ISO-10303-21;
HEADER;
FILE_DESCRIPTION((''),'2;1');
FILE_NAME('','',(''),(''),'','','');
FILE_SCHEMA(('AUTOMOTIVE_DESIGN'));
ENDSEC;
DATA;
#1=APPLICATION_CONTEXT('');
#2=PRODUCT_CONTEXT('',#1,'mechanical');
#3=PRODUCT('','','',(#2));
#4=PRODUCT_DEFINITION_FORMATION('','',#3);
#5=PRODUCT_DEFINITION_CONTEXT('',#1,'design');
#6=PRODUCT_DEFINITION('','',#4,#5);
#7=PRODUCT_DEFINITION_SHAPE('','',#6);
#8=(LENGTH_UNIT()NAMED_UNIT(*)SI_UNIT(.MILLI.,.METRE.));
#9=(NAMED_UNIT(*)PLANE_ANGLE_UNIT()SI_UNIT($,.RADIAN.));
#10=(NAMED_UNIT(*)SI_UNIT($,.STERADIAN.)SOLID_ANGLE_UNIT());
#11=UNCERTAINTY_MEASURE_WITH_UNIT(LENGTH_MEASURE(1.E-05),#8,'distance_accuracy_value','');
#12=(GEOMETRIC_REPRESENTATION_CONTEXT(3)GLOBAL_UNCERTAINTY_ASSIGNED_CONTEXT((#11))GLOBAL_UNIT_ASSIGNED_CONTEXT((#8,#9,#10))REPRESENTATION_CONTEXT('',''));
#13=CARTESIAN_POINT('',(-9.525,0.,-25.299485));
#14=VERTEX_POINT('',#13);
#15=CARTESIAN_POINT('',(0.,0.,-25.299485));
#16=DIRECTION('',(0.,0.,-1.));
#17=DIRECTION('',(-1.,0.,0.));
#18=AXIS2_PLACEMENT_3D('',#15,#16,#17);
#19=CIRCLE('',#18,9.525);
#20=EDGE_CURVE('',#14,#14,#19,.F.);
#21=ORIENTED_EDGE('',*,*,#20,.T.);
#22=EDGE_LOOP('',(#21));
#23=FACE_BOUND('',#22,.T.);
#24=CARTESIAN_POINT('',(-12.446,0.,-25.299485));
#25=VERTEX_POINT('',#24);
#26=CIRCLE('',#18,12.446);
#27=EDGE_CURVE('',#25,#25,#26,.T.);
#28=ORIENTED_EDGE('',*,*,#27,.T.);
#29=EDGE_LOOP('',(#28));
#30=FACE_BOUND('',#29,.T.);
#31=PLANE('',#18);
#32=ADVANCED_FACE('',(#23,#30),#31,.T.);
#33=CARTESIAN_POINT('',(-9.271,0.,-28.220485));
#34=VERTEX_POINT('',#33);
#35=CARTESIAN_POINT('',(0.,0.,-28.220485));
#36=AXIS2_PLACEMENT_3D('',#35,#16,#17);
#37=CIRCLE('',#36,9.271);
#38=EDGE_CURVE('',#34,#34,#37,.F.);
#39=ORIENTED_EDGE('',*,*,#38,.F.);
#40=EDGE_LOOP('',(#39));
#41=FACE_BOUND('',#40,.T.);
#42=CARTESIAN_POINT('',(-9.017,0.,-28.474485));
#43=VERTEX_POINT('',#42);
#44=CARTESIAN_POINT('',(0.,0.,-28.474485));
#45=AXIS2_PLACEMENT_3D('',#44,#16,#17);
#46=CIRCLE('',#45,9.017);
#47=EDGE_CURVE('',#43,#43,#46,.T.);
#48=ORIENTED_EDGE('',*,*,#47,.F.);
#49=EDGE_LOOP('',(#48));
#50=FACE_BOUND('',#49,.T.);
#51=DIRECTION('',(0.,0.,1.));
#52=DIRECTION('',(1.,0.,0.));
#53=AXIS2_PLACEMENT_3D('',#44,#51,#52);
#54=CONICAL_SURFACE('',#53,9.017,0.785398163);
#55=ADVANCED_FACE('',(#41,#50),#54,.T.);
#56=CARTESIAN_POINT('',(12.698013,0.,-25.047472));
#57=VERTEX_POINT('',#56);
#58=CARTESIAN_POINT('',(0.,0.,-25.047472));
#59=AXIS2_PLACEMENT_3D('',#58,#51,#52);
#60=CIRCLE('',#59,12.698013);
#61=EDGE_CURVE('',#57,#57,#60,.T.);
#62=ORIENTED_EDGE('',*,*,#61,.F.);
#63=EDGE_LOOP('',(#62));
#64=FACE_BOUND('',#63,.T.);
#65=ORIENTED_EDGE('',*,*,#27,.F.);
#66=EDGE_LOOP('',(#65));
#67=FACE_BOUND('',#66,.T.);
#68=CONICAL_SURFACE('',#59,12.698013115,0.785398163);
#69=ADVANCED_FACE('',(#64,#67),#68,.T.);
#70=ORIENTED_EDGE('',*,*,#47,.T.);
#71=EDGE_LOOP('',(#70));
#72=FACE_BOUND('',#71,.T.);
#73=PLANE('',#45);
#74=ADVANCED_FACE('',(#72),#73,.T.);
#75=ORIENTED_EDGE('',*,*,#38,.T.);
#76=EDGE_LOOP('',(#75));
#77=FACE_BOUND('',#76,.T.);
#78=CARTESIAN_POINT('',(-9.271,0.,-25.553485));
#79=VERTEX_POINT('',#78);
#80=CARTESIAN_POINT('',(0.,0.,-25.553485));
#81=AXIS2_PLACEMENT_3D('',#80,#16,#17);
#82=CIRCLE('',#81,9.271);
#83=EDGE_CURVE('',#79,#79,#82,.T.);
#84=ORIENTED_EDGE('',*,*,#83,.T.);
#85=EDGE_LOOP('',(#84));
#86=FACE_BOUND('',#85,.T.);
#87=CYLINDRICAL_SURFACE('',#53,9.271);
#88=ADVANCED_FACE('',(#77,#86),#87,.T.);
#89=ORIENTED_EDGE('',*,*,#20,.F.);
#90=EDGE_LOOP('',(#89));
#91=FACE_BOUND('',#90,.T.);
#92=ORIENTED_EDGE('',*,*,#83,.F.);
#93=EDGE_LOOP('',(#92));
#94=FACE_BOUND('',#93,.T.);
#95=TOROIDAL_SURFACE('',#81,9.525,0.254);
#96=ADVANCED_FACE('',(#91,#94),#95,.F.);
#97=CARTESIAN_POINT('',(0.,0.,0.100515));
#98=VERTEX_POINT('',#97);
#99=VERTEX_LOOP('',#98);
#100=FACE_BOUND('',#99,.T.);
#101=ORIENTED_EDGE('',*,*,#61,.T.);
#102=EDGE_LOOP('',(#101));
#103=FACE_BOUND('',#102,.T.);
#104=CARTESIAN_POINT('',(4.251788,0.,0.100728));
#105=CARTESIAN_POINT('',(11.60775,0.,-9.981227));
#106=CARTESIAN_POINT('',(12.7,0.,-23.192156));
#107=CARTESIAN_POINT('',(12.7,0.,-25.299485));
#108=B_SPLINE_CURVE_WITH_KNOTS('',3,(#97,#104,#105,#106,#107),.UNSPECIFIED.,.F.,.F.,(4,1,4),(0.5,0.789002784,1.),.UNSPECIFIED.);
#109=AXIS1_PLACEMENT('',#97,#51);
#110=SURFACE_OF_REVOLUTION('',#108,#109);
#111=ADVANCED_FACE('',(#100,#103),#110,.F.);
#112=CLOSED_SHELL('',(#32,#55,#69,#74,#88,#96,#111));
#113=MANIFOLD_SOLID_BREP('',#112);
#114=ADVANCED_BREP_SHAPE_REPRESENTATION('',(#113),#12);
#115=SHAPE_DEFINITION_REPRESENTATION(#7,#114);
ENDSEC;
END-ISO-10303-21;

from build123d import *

# Parameters (mm, degrees)
SKETCH3_R           = 9.271
BOSS_EXTRUDE1_DEPTH = 3.175
FILLET1_R           = 0.254


with BuildPart() as part:
    # Sketch2 → Revolve5 (revolve)
    with BuildSketch(Plane(origin=(0, 0, 0.100515376), x_dir=(1, 0, 0), z_dir=(0, 1, 0))):
        with BuildLine():
            Line((0, 0), (0, 25.4))
            Line((0, 25.4), (12.7, 25.4))
            add(Edge.make_bspline(
                [(0, 0), (4.251787512, -0.000213004), (11.607750415, 10.081742809), (12.7, 23.292671224), (12.7, 25.4)],
                knots=[0.5, 0.5, 0.5, 0.5, 0.789002784, 1, 1, 1, 1], degree=3))
        make_face()
    revolve(axis=Axis((0, 0, 0.100515376), (0, 0, -1)))

    # Sketch3 → Boss-Extrude1 (add)
    with BuildSketch(Plane(origin=(0, 0, -25.299484624), x_dir=(-1, 0, 0), z_dir=(0, 0, -1))):
        Circle(SKETCH3_R)
    extrude(amount=BOSS_EXTRUDE1_DEPTH)

    # Fillet1
    fillet1_edges = [part.edges().sort_by_distance(p)[0] for p in [
        (9.271, 0, -25.299484624),
    ]]
    fillet(fillet1_edges, radius=FILLET1_R)

    # Chamfer1: read off the stored shape, not the designer's step
    # Chamfer1 outline → Chamfer1 (revolve, cut)
    with BuildSketch(Plane.XZ):
        Polygon((9.271, -28.220484624), (9.017, -28.474484624), (9.271, -28.474484624), align=None)
        Polygon((12.698013115, -25.047471509), (12.446, -25.299484624), (12.698013115, -25.299484624), align=None)
    revolve(axis=Axis((0, 0, 0), (0, 0, 1)), mode=Mode.SUBTRACT)

    # Chamfer1 2 outline → Chamfer1 2 (revolve, cut)
    with BuildSketch(Plane.XZ):
        with BuildLine():
            add(Edge.make_bspline(
                [(12.698013115, -25.047471509), (12.699349278, -25.136229047), (12.7, -25.220304585), (12.7, -25.299484624)],
                knots=[0.992072064, 0.992072064, 0.992072064, 0.992072064, 1, 1, 1, 1], degree=3))
            Line((12.698013115, -25.047471509), (12.698013115, -25.299484624))
            Line((12.698013115, -25.299484624), (12.7, -25.299484624))
        make_face()
    revolve(axis=Axis((0, 0, 0), (0, 0, 1)), mode=Mode.SUBTRACT)


solid = part.part
